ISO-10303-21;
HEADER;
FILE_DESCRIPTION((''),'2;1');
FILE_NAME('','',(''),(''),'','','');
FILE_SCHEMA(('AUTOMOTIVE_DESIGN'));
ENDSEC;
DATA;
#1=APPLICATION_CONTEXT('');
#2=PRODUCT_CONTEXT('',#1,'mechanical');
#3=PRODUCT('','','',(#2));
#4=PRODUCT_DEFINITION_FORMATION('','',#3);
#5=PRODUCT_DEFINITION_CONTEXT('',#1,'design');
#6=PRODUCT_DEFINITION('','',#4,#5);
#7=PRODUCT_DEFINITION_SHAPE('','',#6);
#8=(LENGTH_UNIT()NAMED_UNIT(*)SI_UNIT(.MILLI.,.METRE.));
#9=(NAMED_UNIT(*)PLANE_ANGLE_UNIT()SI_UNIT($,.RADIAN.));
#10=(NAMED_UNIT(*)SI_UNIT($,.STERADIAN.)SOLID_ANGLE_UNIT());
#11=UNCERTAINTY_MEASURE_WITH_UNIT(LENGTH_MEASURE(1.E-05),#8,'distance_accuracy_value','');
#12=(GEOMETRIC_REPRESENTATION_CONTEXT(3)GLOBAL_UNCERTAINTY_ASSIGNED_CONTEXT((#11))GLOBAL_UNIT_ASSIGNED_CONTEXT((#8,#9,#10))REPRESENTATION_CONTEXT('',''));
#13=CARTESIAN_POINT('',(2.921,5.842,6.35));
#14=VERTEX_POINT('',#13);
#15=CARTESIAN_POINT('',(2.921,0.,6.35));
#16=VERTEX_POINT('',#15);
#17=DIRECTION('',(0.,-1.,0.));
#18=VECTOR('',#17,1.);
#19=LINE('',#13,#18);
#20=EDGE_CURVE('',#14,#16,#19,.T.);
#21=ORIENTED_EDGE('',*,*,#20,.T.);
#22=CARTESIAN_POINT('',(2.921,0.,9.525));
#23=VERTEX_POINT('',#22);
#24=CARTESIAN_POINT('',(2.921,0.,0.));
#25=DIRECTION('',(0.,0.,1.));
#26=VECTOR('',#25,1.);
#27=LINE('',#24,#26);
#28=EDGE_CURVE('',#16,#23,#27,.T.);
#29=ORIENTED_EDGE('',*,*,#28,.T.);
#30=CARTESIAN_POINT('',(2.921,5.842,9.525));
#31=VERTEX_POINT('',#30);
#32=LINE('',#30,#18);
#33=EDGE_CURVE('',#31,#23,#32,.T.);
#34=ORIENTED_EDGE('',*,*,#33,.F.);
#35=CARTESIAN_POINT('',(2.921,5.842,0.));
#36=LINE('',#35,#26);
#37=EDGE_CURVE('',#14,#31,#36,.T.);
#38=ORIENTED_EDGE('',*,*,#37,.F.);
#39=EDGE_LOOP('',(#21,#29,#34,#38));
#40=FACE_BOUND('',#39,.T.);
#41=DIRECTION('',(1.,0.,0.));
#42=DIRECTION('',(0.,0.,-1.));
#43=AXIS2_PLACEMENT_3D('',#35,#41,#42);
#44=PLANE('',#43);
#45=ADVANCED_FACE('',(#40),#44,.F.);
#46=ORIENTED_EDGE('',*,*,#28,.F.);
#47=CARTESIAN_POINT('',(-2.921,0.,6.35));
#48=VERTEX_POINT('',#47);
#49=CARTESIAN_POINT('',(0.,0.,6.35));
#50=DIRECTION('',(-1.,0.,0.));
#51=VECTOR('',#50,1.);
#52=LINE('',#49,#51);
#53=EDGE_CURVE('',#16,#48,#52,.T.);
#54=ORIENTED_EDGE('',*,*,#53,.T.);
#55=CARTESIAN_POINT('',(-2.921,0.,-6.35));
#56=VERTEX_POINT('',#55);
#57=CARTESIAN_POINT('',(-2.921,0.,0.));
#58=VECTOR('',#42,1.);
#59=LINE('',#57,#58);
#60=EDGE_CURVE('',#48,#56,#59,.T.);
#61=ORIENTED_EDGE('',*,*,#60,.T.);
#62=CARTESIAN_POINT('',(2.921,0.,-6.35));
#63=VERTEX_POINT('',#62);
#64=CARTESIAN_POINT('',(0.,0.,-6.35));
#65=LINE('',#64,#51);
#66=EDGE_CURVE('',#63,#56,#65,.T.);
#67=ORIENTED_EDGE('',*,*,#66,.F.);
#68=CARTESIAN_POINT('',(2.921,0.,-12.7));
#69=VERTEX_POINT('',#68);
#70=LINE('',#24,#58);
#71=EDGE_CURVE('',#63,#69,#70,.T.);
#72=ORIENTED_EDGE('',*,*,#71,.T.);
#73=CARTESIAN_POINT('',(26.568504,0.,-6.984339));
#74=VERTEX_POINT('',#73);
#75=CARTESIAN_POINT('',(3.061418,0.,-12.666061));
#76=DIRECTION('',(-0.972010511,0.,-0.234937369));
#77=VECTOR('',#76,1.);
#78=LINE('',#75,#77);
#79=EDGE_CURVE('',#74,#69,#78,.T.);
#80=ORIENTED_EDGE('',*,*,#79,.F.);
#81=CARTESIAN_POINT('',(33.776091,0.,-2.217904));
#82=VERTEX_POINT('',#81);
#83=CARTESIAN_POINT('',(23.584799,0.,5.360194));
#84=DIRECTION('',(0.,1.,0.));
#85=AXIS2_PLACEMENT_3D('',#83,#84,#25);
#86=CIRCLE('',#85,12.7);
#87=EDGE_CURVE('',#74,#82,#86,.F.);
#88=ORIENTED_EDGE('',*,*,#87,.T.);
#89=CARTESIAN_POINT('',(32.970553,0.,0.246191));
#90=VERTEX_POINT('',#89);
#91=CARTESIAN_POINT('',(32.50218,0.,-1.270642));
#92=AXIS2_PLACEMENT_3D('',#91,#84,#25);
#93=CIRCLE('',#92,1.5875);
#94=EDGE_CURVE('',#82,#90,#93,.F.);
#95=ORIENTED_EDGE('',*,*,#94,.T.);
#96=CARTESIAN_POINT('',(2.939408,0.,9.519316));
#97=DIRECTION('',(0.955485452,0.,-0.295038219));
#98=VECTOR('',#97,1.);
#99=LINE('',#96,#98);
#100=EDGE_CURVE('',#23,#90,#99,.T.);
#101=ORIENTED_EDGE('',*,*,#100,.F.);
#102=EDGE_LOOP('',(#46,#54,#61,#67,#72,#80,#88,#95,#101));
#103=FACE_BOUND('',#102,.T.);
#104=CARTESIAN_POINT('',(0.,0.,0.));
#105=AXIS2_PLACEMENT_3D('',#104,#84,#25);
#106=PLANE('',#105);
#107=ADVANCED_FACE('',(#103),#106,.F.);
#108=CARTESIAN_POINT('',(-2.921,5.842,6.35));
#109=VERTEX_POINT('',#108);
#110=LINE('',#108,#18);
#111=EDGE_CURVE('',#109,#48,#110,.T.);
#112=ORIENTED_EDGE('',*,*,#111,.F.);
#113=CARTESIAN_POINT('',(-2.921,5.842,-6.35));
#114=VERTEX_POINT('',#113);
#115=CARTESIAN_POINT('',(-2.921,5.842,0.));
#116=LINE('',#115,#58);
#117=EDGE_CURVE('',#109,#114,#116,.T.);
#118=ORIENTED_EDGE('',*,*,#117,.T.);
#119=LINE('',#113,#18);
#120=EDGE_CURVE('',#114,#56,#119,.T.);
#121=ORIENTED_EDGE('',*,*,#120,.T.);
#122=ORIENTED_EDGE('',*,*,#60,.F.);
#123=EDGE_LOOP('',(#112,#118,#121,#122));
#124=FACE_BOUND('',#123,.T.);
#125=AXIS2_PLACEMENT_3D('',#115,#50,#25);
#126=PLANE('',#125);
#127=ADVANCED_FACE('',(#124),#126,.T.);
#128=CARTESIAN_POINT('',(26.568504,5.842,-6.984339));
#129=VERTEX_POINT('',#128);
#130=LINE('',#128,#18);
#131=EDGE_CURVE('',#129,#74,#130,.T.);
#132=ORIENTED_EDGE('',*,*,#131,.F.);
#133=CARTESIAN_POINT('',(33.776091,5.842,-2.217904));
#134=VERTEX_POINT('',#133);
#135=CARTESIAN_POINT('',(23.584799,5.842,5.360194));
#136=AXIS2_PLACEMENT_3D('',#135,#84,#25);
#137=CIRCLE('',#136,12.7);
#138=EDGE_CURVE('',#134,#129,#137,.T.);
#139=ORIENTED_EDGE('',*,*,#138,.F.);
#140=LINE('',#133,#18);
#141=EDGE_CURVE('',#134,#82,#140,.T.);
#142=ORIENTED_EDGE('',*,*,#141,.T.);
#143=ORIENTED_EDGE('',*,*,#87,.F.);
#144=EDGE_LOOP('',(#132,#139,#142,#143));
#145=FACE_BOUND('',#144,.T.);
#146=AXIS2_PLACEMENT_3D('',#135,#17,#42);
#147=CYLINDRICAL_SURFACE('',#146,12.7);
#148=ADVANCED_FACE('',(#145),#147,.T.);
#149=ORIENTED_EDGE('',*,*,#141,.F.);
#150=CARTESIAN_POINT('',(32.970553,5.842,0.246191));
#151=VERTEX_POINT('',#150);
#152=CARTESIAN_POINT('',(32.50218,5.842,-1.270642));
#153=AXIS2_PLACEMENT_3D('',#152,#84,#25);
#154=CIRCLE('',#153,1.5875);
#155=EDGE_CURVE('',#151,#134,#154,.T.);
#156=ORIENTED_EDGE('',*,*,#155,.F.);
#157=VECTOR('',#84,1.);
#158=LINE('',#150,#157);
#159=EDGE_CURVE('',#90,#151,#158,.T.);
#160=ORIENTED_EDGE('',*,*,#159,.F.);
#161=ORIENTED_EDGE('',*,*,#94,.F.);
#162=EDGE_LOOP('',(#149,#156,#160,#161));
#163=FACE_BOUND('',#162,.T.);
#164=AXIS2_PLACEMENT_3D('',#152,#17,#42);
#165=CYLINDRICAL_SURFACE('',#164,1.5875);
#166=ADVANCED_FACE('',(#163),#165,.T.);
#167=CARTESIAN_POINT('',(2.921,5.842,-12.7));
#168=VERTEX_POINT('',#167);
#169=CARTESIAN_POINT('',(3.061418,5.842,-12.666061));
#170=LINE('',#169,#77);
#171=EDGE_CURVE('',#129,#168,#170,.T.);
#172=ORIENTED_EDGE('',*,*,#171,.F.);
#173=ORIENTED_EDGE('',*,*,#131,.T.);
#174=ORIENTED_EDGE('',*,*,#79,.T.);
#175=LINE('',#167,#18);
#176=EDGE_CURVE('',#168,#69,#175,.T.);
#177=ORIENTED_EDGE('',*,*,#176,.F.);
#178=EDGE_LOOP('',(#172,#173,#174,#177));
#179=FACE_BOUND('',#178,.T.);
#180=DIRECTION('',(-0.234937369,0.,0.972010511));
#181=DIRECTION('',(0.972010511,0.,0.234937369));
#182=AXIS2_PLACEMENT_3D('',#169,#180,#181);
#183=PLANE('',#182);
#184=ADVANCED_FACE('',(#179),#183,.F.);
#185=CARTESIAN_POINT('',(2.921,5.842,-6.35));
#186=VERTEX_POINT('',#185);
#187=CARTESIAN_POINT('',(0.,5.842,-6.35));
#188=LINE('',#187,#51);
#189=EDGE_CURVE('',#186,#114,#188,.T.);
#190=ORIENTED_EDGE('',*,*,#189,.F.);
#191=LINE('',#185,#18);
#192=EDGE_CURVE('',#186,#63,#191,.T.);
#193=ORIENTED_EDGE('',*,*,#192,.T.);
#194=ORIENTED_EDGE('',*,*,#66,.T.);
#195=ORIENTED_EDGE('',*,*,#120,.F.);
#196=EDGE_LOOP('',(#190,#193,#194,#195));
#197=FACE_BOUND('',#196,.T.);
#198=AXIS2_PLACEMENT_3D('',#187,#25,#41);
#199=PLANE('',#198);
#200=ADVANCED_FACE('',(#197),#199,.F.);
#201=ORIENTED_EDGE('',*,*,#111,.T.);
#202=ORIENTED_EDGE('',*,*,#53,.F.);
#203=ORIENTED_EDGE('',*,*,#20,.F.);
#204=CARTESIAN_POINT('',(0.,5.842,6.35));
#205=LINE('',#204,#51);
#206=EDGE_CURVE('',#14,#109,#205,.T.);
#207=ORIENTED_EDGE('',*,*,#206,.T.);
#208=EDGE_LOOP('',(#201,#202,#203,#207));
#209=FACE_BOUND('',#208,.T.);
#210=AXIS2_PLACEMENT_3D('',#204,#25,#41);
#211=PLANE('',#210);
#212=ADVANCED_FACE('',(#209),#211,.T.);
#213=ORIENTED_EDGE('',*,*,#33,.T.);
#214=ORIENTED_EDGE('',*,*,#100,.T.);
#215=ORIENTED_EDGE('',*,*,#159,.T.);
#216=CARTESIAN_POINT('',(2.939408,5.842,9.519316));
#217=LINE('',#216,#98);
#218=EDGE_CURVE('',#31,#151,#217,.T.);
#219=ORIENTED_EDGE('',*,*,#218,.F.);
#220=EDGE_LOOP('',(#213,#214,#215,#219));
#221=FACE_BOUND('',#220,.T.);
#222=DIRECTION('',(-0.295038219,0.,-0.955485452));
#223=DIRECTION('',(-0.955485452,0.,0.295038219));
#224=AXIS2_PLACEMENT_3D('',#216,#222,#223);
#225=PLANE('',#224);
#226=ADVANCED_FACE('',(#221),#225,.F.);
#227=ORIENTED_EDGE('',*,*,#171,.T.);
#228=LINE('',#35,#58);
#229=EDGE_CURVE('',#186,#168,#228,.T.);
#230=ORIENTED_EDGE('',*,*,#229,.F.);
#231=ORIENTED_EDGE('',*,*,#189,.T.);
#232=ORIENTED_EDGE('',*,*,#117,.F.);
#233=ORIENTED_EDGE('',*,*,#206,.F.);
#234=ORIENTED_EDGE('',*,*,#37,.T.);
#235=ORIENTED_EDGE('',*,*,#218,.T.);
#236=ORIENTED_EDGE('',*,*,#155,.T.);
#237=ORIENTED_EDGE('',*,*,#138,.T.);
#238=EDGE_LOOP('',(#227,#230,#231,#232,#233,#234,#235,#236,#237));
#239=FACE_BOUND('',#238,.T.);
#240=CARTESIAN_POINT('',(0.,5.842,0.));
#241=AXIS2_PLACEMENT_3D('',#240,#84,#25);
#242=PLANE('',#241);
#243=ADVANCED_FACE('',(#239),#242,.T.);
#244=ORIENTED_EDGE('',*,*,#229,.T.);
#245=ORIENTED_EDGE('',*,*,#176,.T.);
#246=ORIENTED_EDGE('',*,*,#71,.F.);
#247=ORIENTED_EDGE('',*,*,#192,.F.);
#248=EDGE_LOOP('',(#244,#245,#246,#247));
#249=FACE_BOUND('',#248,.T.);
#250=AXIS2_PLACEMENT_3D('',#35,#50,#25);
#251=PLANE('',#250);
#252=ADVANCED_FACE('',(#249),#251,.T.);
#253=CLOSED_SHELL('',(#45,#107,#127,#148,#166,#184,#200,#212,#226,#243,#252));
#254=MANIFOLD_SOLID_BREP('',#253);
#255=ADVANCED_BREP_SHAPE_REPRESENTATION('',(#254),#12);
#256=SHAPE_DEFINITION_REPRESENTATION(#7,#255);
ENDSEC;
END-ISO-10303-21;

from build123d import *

# Parameters (mm, degrees)
BOSS_EXTRUDE1_DEPTH = 5.842
FILLET1_R           = 12.7
FILLET2_R           = 1.5875


with BuildPart() as part:
    # Sketch1 → Boss-Extrude1 (new body)
    with BuildSketch(Plane(origin=(0, 0, 0), x_dir=(1, 0, 0), z_dir=(0, 1, 0))):
        Polygon((34.925, 0.357309717), (34.925, 4.964553254), (2.921, 12.7), (2.921, 6.35), (-2.921, 6.35), (-2.921, -6.35), (2.921, -6.35), (2.921, -9.525), align=None)
    extrude(amount=BOSS_EXTRUDE1_DEPTH)

    # Fillet1
    # the kernel refuses this fillet: 12.7 mm, written as the material it takes off along each edge
    with BuildSketch(Plane(origin=(34.925, -21.492812716, -4.964553254), x_dir=(0, 0, 1), z_dir=(0, 1, 0))) as fillet1_piece_1:
        with BuildLine():
            CenterArc((10.324747541, -11.340200526), FILLET1_R, 116.756334597, 49.655734511)
            Line((-2.019785945, -8.356495946), (-2.266676614, -8.296821854))
            Line((-2.266676614, -8.296821854), (-0.24689067, 0.059674092))
            Line((-0.24689067, 0.059674092), (0, 0.254))
            ThreePointArc((0, 0.254), (2.303621769, 0.254), (4.492893457, 0.226804011))
            Line((4.492893457, 0.226804011), (4.607243537, 0))
        make_face()
    extrude(amount=48.827625432, mode=Mode.SUBTRACT)

    # Fillet2
    fillet2_edges = [part.edges().sort_by_distance(p)[0] for p in [
        (34.925, 2.921, -0.357309717),
    ]]
    fillet(fillet2_edges, radius=FILLET2_R)


solid = part.part
